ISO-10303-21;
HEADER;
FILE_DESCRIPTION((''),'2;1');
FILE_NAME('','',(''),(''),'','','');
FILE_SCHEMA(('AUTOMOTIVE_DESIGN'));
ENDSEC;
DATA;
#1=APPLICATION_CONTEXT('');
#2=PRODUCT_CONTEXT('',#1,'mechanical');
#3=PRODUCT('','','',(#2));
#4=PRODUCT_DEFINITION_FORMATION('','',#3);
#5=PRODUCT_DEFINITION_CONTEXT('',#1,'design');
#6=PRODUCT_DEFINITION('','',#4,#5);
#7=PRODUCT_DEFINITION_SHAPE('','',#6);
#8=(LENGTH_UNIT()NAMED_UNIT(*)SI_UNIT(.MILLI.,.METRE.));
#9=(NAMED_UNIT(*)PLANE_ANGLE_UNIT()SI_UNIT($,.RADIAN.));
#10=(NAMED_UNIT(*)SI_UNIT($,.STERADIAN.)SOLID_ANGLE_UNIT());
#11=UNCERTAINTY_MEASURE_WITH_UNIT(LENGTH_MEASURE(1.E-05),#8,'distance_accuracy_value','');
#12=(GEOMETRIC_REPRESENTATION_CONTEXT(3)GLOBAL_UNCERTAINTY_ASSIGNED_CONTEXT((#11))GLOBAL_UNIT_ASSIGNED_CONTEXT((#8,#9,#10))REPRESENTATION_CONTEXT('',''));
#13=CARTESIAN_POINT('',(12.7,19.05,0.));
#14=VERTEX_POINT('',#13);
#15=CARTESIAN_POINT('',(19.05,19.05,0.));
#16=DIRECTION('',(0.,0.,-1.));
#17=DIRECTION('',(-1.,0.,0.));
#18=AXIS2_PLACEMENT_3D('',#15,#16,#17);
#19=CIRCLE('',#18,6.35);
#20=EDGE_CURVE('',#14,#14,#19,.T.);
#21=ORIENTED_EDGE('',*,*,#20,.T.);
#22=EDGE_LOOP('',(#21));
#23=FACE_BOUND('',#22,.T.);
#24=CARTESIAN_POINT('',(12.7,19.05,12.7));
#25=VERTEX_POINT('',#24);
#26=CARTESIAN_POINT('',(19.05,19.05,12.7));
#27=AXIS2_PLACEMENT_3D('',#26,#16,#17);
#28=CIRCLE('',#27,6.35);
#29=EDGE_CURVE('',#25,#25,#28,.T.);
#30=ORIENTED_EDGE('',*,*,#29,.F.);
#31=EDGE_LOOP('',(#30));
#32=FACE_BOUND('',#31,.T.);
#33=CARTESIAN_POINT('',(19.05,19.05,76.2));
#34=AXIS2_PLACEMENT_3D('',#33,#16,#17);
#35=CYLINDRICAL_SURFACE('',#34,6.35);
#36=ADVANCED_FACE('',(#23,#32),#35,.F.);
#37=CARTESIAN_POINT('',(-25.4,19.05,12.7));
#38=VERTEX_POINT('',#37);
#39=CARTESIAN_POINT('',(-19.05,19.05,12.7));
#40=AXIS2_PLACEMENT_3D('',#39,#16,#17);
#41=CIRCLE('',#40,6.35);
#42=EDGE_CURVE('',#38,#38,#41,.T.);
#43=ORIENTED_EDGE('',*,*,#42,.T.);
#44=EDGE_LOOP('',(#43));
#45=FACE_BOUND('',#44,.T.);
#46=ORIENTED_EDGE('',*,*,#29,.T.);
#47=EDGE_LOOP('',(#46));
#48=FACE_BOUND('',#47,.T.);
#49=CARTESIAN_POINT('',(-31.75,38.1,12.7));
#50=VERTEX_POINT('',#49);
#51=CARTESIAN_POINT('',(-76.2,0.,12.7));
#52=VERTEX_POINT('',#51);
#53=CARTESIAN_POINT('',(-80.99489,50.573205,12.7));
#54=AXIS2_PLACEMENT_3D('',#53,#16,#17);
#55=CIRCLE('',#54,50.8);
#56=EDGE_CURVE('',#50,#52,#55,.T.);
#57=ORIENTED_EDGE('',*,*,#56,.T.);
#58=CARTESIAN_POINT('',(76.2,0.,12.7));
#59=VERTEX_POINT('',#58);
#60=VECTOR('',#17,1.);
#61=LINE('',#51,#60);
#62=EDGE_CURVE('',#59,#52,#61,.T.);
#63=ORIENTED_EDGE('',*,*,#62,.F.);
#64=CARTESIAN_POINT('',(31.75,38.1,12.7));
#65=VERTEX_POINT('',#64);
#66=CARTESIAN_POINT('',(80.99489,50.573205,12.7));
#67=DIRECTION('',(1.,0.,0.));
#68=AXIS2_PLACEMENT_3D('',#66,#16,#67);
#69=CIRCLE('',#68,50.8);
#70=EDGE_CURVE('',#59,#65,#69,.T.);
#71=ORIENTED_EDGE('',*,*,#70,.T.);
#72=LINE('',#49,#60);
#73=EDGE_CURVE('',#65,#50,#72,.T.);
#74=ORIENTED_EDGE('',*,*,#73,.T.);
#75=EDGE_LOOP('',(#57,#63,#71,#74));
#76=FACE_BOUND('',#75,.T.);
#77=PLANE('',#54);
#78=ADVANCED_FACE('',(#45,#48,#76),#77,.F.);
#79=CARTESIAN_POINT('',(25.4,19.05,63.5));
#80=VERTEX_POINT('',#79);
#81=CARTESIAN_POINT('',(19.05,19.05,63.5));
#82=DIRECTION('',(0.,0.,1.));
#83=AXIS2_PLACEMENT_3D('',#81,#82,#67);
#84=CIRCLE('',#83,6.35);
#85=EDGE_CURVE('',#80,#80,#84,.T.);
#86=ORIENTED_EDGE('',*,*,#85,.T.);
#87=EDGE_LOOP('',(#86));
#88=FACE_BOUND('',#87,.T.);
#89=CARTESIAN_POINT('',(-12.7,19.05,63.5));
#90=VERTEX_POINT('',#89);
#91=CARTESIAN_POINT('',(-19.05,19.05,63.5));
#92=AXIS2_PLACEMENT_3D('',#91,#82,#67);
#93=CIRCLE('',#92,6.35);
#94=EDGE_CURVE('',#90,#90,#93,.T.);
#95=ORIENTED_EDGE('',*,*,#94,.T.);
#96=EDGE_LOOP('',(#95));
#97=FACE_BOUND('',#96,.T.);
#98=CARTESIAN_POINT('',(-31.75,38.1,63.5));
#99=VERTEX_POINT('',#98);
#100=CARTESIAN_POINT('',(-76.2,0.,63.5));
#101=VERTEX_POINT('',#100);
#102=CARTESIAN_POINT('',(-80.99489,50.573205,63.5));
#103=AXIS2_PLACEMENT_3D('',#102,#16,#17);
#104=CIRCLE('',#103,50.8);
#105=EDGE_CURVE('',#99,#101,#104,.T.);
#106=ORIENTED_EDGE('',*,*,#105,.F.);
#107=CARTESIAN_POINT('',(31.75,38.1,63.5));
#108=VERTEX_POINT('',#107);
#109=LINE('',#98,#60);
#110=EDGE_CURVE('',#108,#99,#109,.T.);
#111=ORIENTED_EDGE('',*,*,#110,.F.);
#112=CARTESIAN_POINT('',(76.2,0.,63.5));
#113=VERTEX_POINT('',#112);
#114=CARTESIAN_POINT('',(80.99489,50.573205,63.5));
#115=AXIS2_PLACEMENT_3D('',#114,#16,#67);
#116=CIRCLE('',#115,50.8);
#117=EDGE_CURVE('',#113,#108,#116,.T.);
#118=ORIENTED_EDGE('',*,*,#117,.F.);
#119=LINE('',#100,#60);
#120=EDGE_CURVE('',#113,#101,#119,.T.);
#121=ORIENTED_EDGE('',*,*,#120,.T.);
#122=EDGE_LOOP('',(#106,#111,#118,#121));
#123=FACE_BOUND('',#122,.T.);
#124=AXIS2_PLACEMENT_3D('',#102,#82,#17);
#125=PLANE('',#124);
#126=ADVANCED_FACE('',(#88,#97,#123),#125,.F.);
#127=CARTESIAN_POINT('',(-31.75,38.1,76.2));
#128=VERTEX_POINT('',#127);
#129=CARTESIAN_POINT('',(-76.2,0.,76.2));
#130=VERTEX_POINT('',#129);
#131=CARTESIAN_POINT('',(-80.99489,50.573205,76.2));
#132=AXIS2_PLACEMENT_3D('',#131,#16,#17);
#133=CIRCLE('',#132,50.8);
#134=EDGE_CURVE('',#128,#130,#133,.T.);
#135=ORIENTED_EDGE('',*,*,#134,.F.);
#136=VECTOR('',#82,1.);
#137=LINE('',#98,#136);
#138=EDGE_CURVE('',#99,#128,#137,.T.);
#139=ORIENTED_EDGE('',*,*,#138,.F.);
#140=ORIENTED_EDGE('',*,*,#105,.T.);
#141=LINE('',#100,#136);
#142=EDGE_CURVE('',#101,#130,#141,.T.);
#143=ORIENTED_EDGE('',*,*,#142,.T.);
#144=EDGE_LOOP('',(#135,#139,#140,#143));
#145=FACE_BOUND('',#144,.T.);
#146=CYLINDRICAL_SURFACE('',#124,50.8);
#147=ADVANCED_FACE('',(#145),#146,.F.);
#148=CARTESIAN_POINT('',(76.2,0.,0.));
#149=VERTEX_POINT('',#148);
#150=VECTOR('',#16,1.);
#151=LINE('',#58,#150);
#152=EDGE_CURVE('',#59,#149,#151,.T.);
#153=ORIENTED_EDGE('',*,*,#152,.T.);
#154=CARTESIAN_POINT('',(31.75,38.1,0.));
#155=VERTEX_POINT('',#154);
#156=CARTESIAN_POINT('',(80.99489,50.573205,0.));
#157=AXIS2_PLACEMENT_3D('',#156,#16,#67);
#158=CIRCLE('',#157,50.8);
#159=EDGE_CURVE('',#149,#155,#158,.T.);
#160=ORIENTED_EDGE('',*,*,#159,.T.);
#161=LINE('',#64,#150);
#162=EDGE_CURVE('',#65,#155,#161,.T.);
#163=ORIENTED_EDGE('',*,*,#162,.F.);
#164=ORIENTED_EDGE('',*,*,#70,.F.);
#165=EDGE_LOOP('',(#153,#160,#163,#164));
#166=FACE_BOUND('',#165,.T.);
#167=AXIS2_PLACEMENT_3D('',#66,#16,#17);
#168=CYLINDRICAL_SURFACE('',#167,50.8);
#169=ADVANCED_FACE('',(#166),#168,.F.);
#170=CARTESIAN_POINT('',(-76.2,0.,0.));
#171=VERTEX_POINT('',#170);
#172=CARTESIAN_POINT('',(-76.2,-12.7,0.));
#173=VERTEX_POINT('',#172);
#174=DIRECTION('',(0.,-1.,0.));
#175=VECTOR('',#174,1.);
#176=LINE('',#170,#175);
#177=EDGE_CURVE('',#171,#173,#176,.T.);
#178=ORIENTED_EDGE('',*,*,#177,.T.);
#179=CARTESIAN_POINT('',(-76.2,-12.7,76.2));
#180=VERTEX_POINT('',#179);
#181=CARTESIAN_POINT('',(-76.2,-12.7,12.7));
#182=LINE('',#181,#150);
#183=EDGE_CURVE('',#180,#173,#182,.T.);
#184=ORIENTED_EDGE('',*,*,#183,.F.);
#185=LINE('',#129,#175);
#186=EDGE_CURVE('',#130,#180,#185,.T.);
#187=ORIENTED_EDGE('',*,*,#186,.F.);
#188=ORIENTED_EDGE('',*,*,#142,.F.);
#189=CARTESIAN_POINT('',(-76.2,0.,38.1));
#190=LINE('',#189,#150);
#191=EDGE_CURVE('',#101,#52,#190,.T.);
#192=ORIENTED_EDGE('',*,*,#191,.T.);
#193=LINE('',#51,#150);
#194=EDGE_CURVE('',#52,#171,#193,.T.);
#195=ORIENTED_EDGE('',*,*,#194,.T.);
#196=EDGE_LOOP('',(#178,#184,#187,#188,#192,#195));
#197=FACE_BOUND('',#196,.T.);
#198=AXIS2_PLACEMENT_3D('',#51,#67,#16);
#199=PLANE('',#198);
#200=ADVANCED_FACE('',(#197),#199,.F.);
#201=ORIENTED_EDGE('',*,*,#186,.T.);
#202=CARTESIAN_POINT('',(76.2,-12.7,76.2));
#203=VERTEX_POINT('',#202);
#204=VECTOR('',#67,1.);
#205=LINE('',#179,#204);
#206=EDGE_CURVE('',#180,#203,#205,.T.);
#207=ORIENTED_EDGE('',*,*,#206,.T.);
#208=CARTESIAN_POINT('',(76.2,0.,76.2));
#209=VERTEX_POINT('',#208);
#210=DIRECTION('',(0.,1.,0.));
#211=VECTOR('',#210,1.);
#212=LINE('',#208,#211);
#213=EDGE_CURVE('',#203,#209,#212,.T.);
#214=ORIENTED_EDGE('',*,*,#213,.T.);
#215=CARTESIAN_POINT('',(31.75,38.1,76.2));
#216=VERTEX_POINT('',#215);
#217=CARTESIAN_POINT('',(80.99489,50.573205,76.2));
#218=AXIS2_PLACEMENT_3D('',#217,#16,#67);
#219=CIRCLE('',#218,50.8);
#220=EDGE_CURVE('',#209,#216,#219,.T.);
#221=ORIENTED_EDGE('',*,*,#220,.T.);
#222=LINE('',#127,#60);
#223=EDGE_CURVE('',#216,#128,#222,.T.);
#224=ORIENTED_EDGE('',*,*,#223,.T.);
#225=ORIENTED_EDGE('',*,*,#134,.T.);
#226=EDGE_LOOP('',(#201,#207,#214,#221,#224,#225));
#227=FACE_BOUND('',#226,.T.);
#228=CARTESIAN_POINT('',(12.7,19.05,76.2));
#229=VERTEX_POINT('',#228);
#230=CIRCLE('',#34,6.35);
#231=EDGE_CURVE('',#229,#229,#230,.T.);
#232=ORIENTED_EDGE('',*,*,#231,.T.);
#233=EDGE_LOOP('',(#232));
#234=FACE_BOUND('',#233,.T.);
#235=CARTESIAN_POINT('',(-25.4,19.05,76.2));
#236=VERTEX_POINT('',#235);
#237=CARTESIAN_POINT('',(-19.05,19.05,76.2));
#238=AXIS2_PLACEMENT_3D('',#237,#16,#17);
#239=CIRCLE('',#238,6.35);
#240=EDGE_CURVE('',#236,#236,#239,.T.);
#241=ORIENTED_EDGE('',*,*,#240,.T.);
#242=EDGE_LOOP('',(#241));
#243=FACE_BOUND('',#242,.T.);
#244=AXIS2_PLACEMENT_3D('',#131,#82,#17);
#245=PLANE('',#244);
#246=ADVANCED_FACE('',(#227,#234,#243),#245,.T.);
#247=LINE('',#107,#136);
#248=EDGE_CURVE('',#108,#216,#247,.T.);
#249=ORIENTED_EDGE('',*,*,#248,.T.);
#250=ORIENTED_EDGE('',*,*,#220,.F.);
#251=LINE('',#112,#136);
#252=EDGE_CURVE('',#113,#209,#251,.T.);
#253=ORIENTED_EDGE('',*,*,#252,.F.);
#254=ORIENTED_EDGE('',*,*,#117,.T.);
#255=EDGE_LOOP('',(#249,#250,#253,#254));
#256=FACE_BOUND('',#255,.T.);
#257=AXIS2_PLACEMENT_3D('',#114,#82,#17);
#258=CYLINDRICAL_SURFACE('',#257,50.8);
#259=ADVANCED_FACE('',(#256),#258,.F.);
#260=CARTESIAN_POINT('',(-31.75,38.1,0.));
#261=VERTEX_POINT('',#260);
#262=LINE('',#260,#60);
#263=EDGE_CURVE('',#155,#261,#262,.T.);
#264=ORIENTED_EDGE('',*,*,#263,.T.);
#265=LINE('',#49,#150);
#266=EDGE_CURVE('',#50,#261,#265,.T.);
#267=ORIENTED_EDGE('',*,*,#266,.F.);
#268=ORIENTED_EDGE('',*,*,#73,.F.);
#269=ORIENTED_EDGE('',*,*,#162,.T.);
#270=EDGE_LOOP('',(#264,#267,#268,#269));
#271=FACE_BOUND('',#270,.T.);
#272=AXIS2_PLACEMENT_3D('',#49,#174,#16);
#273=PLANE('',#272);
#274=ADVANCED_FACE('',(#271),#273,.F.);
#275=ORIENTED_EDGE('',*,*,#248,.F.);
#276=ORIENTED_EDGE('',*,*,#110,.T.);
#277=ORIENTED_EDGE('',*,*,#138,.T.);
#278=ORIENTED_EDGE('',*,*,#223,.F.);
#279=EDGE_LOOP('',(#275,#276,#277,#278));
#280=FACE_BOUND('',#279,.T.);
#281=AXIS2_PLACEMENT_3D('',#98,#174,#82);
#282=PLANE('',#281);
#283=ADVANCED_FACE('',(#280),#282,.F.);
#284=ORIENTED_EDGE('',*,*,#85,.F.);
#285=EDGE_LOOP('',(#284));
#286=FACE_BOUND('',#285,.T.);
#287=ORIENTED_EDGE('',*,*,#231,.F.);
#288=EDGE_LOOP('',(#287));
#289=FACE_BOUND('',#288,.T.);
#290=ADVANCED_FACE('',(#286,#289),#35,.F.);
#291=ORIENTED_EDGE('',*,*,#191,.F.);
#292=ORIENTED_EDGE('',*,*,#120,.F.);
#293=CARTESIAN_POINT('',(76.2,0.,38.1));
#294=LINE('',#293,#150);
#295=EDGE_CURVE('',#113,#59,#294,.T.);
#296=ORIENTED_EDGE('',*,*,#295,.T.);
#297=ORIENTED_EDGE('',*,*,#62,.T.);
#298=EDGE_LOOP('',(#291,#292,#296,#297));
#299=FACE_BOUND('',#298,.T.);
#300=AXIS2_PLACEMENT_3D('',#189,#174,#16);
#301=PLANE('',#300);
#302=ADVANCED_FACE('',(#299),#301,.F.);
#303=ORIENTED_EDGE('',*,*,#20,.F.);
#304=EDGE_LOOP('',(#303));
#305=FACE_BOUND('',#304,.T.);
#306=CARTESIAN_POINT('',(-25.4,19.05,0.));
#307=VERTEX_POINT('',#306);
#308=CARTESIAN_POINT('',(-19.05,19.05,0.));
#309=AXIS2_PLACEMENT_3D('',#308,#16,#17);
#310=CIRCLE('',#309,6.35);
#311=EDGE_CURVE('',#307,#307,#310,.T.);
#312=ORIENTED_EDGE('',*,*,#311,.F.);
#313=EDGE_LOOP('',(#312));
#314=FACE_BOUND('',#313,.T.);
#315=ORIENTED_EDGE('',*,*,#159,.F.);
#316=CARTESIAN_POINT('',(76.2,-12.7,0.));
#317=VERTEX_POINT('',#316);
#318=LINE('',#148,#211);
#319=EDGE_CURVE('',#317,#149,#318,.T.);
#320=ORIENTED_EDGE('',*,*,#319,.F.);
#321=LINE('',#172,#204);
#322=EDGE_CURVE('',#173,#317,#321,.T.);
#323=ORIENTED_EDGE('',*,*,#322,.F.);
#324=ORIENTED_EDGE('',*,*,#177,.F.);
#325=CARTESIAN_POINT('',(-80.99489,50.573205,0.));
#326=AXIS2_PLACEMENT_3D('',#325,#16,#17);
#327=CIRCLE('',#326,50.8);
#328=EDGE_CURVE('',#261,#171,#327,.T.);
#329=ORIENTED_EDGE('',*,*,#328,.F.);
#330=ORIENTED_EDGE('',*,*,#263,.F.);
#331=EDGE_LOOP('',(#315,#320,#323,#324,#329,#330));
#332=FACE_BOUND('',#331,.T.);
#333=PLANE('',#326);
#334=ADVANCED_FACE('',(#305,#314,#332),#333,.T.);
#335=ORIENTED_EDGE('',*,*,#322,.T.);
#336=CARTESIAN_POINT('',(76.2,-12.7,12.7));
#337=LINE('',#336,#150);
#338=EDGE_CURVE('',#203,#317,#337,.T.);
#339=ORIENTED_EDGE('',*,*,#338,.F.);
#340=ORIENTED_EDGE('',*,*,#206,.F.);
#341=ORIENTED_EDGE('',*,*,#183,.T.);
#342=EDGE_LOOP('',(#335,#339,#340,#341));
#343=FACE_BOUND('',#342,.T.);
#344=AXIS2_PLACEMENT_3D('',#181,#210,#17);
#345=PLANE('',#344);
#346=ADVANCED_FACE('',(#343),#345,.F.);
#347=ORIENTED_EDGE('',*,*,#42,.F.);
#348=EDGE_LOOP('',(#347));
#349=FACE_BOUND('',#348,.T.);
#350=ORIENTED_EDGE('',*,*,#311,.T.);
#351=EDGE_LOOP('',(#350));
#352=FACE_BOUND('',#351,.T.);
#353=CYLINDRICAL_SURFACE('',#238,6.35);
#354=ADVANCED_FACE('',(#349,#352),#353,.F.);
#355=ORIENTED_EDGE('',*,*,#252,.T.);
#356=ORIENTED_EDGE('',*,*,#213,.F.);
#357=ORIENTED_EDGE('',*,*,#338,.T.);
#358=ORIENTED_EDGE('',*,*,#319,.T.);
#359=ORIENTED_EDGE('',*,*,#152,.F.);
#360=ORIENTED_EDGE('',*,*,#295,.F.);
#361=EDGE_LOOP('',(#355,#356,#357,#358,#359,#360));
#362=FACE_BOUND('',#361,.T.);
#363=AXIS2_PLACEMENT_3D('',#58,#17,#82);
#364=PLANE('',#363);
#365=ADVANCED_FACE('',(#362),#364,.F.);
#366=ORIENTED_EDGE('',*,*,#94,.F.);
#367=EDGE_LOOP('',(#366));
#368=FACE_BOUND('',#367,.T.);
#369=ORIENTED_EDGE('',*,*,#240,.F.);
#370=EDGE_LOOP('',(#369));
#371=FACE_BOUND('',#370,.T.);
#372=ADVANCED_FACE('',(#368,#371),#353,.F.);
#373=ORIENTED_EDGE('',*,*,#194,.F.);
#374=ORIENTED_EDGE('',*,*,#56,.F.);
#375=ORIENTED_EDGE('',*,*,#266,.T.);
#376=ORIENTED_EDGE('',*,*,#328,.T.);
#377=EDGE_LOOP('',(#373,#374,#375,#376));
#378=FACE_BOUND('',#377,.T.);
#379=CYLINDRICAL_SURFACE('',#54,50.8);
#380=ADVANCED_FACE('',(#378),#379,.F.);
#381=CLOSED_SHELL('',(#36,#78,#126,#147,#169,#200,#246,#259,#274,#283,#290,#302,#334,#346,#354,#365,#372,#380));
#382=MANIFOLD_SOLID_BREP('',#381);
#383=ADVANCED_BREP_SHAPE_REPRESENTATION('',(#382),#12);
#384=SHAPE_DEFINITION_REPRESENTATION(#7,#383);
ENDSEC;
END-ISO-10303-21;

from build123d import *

# Parameters (mm, degrees)
EXTRUDE1_DEPTH     = 12.7
SKETCH2_W          = 152.4
SKETCH2_H          = 12.7
EXTRUDE2_DEPTH     = 25.4
MIRROR1_START      = 38.1
MIRROR1_OUTLINE_W  = 152.4
MIRROR1_OUTLINE_H  = 12.7
MIRROR1_DEPTH      = 38.1
MIRROR1_START_2    = 63.5
MIRROR1_2_DEPTH    = 12.7
SKETCH4_R          = 6.35
CUT_EXTRUDE1_DEPTH = 115.3


# Read off the part's stored shape, not the designer's step: Mirror1
with BuildPart() as part:
    # Sketch1 → Extrude1 (new body)
    with BuildSketch(Plane.XY):
        with BuildLine():
            Line((-31.75, 38.1), (31.75, 38.1))
            ThreePointArc((31.75, 38.1), (47.934687961, 12.002969288), (76.2, 0))
            Line((76.2, 0), (76.2, -12.7))
            Line((76.2, -12.7), (-76.2, -12.7))
            Line((-76.2, -12.7), (-76.2, 0))
            ThreePointArc((-76.2, 0), (-47.934687961, 12.002969288), (-31.75, 38.1))
        make_face()
    extrude(amount=EXTRUDE1_DEPTH)

    # Sketch2 → Extrude2 (add)
    with BuildSketch(Plane.XY.offset(12.7)):
        with Locations((0, -6.35)):
            Rectangle(SKETCH2_W, SKETCH2_H)
    extrude(amount=EXTRUDE2_DEPTH)

    # Mirror1 outline → Mirror1 (add)
    with BuildSketch(Plane.XY.offset(MIRROR1_START)):
        with Locations((0, -6.35)):
            Rectangle(MIRROR1_OUTLINE_W, MIRROR1_OUTLINE_H)
    extrude(amount=MIRROR1_DEPTH)

    # Mirror1 2 outline → Mirror1 2 (add)
    with BuildSketch(Plane.XY.offset(MIRROR1_START_2)):
        with BuildLine():
            ThreePointArc((-31.75, 38.1), (-47.934687961, 12.002969288), (-76.2, 0))
            Line((-76.2, 0), (76.2, 0))
            ThreePointArc((76.2, 0), (47.934687961, 12.002969288), (31.75, 38.1))
            Line((31.75, 38.1), (-31.75, 38.1))
        make_face()
    extrude(amount=MIRROR1_2_DEPTH)

    # Sketch4 → Cut-Extrude1 (cut, through all)
    with BuildSketch(Plane(origin=(0, 0, 0), x_dir=(-1, 0, 0), z_dir=(0, 0, -1))):
        with Locations((-19.05, 19.05)):
            Circle(SKETCH4_R)
        with Locations((19.05, 19.05)):
            Circle(SKETCH4_R)
    extrude(amount=-CUT_EXTRUDE1_DEPTH, mode=Mode.SUBTRACT)


solid = part.part
